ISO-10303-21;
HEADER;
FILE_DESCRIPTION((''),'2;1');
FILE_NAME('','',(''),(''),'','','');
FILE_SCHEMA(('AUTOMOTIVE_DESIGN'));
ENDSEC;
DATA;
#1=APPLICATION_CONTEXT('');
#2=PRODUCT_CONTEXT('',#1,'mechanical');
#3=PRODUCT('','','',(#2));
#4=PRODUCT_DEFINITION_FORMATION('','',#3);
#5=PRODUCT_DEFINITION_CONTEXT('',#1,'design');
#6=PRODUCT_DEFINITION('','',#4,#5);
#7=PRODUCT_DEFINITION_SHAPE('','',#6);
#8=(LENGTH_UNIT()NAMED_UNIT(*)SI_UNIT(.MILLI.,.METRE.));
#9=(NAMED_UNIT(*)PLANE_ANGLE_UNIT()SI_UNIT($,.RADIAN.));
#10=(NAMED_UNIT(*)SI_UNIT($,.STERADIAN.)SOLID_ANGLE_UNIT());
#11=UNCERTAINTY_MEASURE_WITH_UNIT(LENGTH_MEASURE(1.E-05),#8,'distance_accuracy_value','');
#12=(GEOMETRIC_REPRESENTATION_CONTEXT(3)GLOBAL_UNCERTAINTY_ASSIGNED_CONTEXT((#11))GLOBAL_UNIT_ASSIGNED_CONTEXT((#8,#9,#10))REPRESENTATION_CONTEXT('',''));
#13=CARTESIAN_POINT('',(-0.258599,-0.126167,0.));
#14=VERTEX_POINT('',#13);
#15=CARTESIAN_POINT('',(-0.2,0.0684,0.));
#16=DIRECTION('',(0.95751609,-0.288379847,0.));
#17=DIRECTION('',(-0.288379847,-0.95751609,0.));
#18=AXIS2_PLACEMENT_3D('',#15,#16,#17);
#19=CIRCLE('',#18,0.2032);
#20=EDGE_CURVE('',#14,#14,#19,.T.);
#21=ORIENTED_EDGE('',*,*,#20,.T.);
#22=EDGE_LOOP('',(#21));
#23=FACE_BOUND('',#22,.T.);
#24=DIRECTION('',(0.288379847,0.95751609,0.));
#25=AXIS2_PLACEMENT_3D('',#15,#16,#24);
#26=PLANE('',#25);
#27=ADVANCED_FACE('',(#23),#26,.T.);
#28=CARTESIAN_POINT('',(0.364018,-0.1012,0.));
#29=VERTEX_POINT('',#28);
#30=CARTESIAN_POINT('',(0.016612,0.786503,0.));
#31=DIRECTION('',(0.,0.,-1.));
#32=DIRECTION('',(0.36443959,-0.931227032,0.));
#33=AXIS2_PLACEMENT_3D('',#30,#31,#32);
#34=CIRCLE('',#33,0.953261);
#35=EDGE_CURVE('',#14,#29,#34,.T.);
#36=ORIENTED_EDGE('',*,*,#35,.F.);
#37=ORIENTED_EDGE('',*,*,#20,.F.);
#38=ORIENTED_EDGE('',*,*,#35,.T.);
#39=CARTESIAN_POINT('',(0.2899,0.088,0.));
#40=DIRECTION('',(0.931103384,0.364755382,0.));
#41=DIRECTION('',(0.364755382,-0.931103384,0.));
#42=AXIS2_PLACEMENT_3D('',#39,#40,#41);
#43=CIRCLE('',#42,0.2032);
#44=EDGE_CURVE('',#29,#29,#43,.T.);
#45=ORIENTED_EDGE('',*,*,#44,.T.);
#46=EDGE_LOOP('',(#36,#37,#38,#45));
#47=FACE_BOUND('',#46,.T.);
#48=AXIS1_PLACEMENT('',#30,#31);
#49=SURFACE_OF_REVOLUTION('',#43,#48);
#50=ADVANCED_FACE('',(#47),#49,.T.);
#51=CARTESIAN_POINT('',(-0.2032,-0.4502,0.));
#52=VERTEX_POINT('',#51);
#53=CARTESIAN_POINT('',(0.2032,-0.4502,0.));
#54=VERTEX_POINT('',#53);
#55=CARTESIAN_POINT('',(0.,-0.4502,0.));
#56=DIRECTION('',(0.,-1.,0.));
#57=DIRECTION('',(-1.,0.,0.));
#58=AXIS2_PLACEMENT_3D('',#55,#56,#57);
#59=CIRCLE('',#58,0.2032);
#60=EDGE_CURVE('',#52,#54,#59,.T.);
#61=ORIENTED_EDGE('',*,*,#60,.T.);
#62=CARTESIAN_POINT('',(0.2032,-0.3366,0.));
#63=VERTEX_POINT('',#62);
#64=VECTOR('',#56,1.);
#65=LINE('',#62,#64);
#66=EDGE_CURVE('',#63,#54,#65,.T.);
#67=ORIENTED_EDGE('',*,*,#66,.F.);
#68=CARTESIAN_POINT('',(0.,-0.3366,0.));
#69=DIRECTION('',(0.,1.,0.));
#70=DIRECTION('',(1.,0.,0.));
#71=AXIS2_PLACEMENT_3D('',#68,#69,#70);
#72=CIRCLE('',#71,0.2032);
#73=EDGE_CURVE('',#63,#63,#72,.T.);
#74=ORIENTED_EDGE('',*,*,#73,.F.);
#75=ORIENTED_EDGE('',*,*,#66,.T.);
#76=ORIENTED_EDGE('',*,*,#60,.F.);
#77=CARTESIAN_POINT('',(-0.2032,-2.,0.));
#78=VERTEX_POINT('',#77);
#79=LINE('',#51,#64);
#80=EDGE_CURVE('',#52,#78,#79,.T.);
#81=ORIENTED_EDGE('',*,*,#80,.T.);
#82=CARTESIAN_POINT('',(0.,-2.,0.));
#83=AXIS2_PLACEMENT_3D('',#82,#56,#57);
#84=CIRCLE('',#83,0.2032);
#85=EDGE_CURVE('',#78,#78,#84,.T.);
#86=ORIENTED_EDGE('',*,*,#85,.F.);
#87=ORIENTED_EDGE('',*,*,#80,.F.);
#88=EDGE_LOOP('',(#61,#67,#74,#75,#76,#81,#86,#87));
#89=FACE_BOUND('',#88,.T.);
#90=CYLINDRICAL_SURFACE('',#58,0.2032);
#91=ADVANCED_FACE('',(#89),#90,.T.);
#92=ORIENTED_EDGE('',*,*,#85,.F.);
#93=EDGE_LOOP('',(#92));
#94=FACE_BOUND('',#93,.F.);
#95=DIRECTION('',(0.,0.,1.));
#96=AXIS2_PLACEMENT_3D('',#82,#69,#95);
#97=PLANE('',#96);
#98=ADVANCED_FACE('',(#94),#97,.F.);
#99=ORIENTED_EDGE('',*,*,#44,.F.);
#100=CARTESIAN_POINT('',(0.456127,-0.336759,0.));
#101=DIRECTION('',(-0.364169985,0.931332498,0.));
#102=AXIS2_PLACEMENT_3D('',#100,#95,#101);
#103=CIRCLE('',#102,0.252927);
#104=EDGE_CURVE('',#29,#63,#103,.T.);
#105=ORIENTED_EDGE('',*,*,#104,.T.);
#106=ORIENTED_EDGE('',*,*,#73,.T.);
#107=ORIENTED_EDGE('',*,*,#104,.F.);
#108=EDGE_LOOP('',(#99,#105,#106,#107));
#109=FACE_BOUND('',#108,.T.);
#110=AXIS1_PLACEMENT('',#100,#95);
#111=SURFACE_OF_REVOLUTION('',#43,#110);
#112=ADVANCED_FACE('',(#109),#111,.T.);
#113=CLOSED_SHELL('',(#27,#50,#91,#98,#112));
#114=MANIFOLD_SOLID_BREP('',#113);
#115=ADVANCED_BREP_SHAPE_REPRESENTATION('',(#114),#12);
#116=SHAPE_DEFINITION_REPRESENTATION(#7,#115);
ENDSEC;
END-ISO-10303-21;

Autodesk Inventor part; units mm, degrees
ref_plane "YZ Plane" through (0, 0, 0) normal (1, 0, 0) x (0, 1, 0)
ref_plane "XY Plane" through (0, 0, 0) normal (0, 0, 1) x (1, 0, 0)
sketch "Block1" plane through (0, 0, 0) normal (0, 0, 1) x (1, 0, 0)
  line L0 (0, -0.4502) -> (0, -2)
  arc A0 (0.2899, 0.088) -> (-0.2, 0.0684) centre (0.0166, 0.7865) ccw
  arc A1 (0.2899, 0.088) -> (0, -0.3366) centre (0.456, -0.3366) ccw
  line L1 (0, -0.3366) -> (0, -0.519)
  point P0 (0.0505, -0.4167)
  point P1 (0.0166, -0.9635)
  dimension "d1" = 1.5
ref_plane "Work Plane1" through (0, -2, 0) normal (0, 1, 0) x (-1, 0, 0)
sketch "Sketch1" plane through (0, 0, 0) normal (0, 0, 1) x (1, 0, 0)
  line L0 (0, -0.4502) -> (0, -2)
  arc A0 (0.2899, 0.088) -> (-0.2, 0.0684) centre (0.0166, 0.7865) ccw
  arc A1 (0.2899, 0.088) -> (0, -0.3366) centre (0.456, -0.3366) ccw
  line L1 (0, -0.3366) -> (0, -0.519)
  point P0 (0, 0)
sketch "Sketch2" plane through (0, -2, 0) normal (0, 1, 0) x (-1, 0, 0)
  circle A0 centre (0, 0) radius 0.2032
  dimension "d4" = 0.4064
sweep "Sweep1" [suppressed]
sweep "Sweep4" add profiles "Sketch2" path "Sketch1" path curves L0
sketch "Sketch4" plane through (0, -0.4502, 0) normal (0, 1, 0) x (1, 0, 0)
  circle A0 centre (0, 0) radius 0.2032 projected
sweep "Sweep5" add profiles "Sketch4" path "Sketch1" path curves L1 A1 A0
ref_plane "Work Plane2" through (0, 1.3, 0) normal (0, 1, 0) x (-1, 0, 0)
properties part number "Eye_Pin_26Ga"
